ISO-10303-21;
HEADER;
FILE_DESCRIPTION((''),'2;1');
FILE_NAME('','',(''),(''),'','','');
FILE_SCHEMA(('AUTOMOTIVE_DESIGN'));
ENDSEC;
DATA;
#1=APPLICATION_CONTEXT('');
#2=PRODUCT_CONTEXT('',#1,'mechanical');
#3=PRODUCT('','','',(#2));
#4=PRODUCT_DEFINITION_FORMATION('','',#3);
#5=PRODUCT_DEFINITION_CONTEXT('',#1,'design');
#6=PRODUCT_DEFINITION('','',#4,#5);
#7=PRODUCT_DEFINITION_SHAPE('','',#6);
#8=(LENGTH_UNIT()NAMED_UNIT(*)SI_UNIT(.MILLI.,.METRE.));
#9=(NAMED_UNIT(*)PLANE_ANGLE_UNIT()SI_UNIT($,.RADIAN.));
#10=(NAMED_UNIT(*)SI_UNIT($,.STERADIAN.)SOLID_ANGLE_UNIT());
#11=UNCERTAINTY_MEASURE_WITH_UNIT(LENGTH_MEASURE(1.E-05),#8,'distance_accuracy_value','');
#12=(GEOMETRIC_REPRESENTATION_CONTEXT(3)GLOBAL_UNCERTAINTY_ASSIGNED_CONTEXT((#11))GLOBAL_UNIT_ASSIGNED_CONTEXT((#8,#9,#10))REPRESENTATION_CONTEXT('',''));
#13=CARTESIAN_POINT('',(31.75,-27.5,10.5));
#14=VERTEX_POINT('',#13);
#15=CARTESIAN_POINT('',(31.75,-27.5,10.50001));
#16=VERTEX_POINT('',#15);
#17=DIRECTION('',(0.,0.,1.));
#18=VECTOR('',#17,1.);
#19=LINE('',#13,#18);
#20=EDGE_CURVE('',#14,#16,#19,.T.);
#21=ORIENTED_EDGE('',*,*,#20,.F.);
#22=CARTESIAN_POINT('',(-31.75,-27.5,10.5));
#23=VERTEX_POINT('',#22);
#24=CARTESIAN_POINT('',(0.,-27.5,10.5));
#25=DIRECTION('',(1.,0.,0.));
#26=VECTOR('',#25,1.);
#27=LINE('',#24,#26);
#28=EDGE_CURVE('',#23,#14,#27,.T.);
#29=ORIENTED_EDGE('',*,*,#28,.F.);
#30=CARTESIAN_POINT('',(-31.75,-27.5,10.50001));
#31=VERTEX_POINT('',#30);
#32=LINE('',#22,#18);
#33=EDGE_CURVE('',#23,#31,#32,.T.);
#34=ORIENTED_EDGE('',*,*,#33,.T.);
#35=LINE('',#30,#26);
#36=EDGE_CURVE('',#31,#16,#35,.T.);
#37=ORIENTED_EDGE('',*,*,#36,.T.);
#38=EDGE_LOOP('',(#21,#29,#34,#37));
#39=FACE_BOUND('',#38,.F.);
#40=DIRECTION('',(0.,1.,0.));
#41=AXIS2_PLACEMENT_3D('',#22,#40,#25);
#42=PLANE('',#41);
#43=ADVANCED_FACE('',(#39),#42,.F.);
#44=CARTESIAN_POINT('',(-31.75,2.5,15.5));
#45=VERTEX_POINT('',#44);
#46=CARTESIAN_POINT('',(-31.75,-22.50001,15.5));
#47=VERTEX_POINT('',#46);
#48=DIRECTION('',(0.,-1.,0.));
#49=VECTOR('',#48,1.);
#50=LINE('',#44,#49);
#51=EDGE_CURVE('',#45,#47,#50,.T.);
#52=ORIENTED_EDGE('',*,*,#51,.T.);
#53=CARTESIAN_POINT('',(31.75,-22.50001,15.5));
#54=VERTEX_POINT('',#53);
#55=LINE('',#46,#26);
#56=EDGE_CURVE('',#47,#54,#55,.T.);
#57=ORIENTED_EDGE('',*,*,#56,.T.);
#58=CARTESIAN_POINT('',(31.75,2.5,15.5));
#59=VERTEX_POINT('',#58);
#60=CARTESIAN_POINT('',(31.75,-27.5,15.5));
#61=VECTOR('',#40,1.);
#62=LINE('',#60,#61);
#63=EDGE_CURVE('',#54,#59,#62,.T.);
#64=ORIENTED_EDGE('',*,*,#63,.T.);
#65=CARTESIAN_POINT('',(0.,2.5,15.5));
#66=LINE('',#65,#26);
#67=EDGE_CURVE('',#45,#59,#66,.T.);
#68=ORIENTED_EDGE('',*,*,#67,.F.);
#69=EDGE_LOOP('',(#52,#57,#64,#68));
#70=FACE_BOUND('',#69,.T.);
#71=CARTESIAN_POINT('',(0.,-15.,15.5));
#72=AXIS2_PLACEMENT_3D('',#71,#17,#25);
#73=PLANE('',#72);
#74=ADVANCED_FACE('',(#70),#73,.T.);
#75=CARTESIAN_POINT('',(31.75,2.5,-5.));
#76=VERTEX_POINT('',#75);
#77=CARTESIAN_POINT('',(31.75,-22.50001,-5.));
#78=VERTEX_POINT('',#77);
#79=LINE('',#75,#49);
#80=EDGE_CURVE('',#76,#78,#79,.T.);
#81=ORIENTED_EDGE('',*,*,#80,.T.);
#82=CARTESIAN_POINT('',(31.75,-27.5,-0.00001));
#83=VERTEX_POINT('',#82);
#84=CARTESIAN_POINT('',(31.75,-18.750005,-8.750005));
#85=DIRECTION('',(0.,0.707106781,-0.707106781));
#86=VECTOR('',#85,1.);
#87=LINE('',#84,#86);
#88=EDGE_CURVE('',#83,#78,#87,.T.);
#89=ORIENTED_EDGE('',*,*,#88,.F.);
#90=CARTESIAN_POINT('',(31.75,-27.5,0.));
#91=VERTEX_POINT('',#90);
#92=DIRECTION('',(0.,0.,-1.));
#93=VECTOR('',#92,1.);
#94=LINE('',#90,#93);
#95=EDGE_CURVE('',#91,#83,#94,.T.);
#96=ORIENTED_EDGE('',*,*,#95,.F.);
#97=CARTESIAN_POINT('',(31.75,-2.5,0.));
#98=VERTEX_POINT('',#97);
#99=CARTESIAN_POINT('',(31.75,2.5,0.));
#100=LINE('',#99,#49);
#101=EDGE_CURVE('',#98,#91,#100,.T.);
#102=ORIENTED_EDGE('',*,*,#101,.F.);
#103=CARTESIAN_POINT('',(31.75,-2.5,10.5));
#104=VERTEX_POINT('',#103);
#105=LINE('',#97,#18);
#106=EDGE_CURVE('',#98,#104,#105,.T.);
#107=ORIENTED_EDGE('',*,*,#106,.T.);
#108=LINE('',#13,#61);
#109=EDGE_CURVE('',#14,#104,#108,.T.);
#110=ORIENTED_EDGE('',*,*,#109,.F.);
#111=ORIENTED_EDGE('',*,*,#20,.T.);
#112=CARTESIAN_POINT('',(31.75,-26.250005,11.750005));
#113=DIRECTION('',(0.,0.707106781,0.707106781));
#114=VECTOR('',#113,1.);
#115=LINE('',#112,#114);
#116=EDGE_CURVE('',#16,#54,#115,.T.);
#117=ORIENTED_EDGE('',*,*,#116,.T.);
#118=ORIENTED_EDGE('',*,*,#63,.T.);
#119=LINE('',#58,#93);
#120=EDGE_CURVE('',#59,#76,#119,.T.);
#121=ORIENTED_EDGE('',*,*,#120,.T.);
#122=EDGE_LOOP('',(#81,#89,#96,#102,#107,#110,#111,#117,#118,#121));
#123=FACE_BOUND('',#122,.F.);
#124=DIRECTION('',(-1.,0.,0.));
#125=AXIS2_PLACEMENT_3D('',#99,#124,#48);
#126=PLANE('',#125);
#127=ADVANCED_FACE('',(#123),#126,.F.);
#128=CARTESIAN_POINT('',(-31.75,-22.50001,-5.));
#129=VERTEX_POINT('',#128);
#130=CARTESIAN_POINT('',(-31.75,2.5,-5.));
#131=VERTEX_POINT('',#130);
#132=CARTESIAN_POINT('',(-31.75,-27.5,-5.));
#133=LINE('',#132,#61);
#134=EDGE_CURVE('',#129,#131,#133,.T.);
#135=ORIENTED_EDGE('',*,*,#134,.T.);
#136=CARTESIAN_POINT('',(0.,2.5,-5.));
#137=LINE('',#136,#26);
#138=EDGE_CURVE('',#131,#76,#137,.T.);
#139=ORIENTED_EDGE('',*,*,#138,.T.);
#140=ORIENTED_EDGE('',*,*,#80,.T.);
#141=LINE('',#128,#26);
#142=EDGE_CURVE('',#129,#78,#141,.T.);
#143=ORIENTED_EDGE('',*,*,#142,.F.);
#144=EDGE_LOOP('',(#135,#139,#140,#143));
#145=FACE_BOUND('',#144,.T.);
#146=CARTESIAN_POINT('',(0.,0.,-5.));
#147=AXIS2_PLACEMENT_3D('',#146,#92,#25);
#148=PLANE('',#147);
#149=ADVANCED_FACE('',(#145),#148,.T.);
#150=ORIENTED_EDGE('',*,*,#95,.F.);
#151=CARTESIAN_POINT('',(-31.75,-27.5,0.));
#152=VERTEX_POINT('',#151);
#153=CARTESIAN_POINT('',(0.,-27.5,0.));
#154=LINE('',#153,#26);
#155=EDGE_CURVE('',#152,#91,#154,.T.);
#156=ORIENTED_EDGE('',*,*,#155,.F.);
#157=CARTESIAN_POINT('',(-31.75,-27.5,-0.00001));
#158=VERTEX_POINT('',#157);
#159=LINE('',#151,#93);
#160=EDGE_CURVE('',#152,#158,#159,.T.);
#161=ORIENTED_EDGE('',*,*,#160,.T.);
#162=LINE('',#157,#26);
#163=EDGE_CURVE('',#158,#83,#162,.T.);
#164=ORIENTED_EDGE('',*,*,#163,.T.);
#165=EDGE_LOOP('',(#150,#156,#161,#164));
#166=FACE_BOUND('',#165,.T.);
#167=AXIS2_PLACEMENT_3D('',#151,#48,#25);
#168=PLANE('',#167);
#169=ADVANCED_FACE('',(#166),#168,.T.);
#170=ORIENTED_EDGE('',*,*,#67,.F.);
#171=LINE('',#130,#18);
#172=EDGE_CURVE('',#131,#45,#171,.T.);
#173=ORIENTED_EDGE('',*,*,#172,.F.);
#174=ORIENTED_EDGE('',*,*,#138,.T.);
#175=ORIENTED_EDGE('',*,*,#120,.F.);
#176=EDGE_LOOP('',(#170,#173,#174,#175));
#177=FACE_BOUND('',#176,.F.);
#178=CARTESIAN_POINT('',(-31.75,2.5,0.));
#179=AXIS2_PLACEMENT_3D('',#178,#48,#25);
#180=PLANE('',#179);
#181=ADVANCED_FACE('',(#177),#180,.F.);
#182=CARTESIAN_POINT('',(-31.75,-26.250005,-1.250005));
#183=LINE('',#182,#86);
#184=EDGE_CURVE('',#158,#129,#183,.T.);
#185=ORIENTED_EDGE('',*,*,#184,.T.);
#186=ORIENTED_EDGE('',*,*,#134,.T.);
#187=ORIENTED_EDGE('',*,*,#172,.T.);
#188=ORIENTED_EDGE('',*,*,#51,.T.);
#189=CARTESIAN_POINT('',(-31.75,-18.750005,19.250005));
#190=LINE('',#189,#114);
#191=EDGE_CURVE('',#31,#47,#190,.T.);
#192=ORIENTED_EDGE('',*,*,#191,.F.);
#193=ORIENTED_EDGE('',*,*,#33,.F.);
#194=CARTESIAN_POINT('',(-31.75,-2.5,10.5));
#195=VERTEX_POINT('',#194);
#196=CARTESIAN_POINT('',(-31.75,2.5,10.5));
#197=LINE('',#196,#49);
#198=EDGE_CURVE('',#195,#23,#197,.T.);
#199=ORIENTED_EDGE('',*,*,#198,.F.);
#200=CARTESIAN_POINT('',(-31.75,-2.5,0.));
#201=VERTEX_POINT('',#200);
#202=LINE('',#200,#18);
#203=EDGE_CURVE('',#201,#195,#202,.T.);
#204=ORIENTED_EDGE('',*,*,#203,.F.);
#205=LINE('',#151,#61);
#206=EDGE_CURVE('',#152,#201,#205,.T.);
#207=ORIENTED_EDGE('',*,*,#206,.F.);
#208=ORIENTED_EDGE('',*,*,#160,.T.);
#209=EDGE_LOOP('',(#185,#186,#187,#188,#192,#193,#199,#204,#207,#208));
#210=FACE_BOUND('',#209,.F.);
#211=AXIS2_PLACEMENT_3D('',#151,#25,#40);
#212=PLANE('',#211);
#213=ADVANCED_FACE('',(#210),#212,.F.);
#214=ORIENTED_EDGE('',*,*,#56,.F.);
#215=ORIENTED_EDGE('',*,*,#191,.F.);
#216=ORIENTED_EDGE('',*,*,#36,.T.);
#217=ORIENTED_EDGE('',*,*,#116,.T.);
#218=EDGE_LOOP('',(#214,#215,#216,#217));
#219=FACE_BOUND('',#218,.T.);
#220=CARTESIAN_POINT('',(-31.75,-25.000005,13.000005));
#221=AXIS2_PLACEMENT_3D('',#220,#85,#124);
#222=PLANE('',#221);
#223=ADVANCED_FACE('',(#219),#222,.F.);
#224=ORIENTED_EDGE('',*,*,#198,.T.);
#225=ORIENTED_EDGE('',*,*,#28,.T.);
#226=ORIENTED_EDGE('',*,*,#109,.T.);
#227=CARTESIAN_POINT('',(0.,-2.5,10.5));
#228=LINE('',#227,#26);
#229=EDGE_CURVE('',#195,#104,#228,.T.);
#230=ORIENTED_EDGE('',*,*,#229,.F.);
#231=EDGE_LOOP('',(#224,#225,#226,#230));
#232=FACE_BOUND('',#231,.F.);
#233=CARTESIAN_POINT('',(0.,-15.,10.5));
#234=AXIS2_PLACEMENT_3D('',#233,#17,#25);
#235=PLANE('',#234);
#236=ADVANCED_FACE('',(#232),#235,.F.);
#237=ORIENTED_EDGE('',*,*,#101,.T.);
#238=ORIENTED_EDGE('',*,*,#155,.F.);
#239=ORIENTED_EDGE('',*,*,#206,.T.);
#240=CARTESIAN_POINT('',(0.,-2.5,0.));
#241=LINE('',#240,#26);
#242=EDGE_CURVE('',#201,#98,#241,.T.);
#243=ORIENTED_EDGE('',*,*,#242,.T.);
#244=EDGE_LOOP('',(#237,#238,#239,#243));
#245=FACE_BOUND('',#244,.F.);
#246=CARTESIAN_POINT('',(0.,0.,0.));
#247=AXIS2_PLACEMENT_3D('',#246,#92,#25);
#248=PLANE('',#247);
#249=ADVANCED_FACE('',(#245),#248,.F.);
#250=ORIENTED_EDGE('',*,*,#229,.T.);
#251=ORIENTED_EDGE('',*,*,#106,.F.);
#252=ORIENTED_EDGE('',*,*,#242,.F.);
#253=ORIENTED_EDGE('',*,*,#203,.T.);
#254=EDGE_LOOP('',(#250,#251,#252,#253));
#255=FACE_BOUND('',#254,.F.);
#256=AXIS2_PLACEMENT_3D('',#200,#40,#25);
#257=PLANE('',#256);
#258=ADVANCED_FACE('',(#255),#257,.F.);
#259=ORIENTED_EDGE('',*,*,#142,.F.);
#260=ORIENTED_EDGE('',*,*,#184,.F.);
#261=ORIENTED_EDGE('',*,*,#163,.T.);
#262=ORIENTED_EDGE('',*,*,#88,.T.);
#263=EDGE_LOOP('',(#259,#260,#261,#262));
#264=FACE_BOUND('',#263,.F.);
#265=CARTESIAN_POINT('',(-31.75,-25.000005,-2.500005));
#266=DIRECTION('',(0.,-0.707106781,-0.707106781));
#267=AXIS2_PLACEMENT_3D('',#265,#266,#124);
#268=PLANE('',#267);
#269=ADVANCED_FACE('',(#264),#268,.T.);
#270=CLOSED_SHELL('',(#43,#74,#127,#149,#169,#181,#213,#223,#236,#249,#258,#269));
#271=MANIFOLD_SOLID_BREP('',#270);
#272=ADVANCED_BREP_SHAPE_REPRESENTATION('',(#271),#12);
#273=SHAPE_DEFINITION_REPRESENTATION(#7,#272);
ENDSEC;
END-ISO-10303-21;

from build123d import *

# Parameters (mm, degrees)
F0_W     = 63.5
F0_H     = 5
F1_DEPTH = 10.5
F2_W     = 63.5
F2_H     = 25
F2_H_2   = 5
F3_DEPTH = 5
F4_SIZE  = 4.99999
F5_W     = 63.5
F5_H     = 5
F5_H_2   = 25
F6_DEPTH = 5
F7_SIZE  = 4.99999


# Not quite as in the source:
# - a fillet or chamfer is up to 0.001 mm smaller than in the source, because OpenCascade refuses the exact size


with BuildPart() as f1:
    # F0 (on Top) → F1 (new body)
    with BuildSketch(Plane.XY):
        Rectangle(F0_W, F0_H)
    extrude(amount=F1_DEPTH)

    # F2 (on face) → F3 (join)
    with BuildSketch(Plane.XY.offset(10.5)):
        with Locations((0, -15)):
            Rectangle(F2_W, F2_H)
        Rectangle(F2_W, F2_H_2)
    extrude(amount=F3_DEPTH)

    # F4 (size 5 in the source; OpenCascade refuses exactly that, so slightly less here)
    f4_edges = [f1.edges().sort_by_distance(p)[0] for p in [
        (0, -27.5, 15.5),
    ]]
    chamfer(f4_edges, length=F4_SIZE)

    # F5 (on face) → F6 (join)
    with BuildSketch(Plane(origin=(0, 0, 0), x_dir=(1, 0, 0), z_dir=(0, 0, -1))):
        Rectangle(F5_W, F5_H)
        with Locations((0, 15)):
            Rectangle(F5_W, F5_H_2)
    extrude(amount=F6_DEPTH)

    # F7 (size 5 in the source; OpenCascade refuses exactly that, so slightly less here)
    f7_edges = [f1.edges().sort_by_distance(p)[0] for p in [
        (0, -27.5, -5),
    ]]
    chamfer(f7_edges, length=F7_SIZE)


solid = f1.part
